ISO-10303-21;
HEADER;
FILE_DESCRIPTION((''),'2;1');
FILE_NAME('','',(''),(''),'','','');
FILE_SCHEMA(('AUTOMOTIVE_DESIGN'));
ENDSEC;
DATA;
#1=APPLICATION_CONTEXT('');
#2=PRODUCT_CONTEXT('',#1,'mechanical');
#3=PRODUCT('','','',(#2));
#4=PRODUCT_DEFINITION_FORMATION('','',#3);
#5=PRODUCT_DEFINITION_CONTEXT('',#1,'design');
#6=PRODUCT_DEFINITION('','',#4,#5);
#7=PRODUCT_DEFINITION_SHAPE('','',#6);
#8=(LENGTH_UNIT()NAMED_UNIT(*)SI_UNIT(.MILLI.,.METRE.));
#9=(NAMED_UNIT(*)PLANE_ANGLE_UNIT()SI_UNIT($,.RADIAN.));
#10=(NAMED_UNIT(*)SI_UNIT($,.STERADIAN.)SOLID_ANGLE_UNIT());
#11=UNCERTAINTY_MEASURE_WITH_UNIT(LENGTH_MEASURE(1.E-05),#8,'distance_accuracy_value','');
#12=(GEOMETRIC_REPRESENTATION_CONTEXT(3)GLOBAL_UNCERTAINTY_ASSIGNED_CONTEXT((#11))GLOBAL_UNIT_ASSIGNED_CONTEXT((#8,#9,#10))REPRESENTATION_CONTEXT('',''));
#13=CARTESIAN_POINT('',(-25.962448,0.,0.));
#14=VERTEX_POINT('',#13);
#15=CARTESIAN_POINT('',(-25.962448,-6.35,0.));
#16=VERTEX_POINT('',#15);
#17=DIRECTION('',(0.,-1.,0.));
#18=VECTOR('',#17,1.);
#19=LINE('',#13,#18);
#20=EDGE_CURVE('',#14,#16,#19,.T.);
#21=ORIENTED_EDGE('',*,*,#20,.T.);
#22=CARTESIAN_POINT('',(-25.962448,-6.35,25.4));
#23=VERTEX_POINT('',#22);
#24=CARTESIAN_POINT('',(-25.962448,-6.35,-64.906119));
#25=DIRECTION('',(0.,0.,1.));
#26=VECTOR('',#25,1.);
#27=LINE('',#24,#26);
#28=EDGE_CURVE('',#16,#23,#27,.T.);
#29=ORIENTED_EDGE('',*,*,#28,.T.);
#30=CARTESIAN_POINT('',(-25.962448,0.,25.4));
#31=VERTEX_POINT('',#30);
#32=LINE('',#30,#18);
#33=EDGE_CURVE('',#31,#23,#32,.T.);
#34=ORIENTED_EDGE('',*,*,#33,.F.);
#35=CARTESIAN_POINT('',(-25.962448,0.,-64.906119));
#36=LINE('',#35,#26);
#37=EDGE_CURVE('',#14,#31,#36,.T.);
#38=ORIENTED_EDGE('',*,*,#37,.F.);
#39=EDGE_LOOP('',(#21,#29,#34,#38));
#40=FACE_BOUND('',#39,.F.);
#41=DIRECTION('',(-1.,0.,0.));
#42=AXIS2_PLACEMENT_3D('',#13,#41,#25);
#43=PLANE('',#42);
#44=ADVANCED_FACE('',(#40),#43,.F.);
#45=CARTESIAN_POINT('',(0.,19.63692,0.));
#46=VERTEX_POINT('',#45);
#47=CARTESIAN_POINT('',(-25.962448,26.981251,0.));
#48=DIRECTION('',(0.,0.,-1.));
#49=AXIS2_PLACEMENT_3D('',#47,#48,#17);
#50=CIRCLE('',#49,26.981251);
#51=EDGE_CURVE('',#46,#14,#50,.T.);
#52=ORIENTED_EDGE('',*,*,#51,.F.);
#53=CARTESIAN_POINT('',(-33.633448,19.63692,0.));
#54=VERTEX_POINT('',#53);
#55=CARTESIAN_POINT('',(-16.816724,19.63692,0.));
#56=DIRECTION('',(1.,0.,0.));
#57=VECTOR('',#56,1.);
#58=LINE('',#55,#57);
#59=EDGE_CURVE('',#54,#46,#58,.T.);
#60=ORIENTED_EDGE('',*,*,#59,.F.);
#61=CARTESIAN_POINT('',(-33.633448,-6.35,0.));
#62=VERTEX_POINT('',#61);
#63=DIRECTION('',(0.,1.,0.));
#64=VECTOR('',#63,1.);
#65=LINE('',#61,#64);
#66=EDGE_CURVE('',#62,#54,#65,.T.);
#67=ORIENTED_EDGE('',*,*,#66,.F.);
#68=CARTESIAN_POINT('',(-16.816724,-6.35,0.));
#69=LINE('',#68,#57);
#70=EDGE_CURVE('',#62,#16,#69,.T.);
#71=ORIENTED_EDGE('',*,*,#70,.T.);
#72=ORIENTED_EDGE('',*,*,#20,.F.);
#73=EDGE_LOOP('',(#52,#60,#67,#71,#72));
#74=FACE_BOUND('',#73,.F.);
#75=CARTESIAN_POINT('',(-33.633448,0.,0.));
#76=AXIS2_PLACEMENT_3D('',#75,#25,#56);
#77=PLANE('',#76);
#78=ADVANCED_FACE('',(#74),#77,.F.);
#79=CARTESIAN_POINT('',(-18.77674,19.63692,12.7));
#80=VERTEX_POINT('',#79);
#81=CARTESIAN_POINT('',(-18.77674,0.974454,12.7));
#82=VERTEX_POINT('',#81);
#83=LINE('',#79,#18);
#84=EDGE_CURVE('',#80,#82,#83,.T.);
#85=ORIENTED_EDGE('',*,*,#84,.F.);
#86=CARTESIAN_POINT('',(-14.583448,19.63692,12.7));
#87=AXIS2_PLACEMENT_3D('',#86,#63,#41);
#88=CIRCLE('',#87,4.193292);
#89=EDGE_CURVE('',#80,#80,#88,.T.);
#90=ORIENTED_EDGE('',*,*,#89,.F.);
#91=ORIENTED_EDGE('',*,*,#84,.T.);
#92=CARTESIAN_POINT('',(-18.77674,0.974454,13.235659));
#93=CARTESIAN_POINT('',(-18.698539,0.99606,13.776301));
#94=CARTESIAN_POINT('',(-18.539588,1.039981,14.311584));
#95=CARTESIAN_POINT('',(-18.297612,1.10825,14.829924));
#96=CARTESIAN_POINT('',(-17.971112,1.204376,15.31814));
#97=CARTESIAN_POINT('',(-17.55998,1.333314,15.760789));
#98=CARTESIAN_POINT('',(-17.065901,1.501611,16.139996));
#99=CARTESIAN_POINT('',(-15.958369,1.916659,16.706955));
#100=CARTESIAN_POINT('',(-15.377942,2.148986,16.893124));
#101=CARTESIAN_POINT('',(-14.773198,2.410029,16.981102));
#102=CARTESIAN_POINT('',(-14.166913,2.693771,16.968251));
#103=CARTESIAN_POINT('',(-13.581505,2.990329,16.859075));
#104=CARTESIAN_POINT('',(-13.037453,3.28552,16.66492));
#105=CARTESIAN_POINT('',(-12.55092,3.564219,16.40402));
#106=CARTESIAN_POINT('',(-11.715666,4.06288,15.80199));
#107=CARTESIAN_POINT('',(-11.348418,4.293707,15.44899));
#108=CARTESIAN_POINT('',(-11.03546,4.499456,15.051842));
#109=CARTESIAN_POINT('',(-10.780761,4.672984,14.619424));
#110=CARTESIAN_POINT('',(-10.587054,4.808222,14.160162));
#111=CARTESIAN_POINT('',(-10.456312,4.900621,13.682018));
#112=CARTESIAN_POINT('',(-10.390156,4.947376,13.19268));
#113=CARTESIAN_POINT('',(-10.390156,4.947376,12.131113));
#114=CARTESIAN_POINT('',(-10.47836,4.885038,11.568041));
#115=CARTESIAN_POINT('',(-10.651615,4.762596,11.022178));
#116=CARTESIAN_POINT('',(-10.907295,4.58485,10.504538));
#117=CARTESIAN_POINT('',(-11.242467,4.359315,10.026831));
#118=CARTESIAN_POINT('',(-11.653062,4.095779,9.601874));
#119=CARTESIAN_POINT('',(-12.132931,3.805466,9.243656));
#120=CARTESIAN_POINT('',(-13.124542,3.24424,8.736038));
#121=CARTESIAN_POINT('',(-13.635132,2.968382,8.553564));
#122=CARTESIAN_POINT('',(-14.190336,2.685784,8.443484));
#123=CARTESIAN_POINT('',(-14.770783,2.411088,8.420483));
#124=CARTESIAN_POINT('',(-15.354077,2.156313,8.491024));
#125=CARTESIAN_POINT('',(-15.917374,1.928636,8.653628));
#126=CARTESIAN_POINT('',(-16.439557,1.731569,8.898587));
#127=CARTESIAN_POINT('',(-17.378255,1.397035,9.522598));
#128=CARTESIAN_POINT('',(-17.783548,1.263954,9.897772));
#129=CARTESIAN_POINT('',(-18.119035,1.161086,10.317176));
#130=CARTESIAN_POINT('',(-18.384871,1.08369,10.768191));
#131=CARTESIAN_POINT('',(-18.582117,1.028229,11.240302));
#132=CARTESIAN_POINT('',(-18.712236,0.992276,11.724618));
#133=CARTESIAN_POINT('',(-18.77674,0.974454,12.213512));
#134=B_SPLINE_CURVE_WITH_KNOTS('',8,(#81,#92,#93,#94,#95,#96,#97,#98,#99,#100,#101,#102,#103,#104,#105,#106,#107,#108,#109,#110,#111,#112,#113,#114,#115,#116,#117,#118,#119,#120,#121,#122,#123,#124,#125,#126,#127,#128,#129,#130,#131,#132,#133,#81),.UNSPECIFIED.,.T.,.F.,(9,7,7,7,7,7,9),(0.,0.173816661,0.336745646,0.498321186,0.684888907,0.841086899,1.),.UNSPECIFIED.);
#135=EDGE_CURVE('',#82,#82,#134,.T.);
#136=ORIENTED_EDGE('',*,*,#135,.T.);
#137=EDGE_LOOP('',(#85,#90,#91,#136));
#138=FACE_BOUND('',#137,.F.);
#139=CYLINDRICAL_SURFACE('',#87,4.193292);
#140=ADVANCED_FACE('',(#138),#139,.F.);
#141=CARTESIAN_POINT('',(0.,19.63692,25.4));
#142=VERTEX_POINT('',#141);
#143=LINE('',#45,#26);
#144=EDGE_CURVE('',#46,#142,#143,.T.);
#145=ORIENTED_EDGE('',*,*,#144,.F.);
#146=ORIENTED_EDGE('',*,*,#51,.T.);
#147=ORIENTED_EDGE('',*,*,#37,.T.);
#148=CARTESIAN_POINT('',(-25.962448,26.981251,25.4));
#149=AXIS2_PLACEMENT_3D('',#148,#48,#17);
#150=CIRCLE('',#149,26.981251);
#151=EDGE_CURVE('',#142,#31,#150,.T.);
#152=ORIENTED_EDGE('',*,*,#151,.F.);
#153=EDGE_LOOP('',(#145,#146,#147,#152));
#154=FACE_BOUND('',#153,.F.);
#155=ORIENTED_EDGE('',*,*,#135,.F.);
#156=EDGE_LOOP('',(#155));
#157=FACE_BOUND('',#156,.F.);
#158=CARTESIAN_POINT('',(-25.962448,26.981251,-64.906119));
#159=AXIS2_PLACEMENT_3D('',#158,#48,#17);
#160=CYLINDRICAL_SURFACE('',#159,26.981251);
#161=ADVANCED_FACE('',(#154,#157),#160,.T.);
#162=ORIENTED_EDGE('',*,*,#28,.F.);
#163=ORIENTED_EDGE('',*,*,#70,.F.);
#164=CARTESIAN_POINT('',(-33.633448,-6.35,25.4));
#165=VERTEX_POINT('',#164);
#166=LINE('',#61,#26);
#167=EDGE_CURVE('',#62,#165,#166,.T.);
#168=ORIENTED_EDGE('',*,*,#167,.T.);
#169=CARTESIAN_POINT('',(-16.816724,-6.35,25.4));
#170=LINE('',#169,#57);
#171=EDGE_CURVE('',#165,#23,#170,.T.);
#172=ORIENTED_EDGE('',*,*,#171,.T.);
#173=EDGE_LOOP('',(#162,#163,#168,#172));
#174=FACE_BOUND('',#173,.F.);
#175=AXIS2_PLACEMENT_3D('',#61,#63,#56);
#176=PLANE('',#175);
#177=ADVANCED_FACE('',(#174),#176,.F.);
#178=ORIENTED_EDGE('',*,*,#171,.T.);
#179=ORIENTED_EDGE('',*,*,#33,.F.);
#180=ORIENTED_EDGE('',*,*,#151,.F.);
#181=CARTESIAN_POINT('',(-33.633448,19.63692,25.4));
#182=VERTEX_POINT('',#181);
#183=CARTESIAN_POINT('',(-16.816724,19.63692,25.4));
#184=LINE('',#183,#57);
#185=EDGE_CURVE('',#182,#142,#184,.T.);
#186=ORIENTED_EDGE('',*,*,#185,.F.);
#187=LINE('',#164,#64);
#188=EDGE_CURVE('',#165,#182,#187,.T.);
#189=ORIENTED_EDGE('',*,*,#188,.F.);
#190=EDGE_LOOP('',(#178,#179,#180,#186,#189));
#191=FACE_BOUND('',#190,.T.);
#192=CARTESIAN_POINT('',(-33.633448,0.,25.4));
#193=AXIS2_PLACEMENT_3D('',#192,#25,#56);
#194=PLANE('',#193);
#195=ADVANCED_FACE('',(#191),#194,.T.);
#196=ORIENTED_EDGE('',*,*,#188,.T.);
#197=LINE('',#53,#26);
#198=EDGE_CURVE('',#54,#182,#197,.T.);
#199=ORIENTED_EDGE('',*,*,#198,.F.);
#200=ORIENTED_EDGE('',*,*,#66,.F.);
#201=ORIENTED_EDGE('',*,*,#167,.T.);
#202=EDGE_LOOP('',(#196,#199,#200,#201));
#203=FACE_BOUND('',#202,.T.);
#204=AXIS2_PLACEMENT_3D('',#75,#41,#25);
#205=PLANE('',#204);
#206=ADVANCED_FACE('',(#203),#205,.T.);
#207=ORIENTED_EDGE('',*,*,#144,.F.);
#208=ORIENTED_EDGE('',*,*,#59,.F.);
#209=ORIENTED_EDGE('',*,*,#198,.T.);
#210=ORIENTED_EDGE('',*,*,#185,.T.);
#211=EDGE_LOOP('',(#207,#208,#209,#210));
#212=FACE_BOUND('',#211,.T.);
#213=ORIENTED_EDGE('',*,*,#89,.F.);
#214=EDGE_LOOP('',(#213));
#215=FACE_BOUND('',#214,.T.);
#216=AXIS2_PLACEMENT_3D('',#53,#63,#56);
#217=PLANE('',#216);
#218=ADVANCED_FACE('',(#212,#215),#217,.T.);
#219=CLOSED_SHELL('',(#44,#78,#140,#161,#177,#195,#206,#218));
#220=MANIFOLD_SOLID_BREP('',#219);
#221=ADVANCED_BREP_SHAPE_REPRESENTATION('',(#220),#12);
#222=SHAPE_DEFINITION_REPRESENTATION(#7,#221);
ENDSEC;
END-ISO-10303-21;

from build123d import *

# Parameters (mm, degrees)
F0_W        = 33.6334481835
F0_H        = 19.636919722
F1_DEPTH    = 25.4
F2_T1_DEPTH = 155.2122388964
F3_R        = 4.1932918126
F4_DEPTH    = 41.402
F5_DEPTH    = 6.35


# Not quite as in the source:
# - a fillet or chamfer that OpenCascade refuses, or shapes differently, is made with other operations: its cross-section is extruded or revolved along the edge and cut away or added


with BuildPart() as f1:
    # F0 (on Top) → F1 (new body)
    with BuildSketch(Plane.XY):
        with Locations((-16.8167240918, 9.818459861)):
            Rectangle(F0_W, F0_H)
    extrude(amount=F1_DEPTH)

    # F2: fillet of radius 26.9812507731 on 1 edges, made by hand

    # F2_s2 → F2_t1 (cut)
    with BuildSketch(Plane.XY.offset(-64.9061194482)):
        with BuildLine():
            ThreePointArc((-25.9624477793, 0), (-9.6862587992, 5.4621066087), (0, 19.636919722))
            Line((0, 19.636919722), (0, 0))
            Line((0, 0), (-25.9624477793, 0))
        make_face()
    extrude(amount=F2_T1_DEPTH, mode=Mode.SUBTRACT)

    # F3 (on face) → F4 (cut)
    with BuildSketch(Plane(origin=(0, 19.636919722, 0), x_dir=(-1, 0, 0), z_dir=(0, 1, 0))):
        with Locations((14.5834481835, 12.7)):
            Circle(F3_R)
    extrude(amount=-F4_DEPTH, mode=Mode.SUBTRACT)

    # F5 (add): a face of the model
    f5_faces = [f1.faces().sort_by_distance(p)[0] for p in [
        (-29.7979479814, 0, 12.7),
    ]]
    extrude(f5_faces, amount=F5_DEPTH)


solid = f1.part
